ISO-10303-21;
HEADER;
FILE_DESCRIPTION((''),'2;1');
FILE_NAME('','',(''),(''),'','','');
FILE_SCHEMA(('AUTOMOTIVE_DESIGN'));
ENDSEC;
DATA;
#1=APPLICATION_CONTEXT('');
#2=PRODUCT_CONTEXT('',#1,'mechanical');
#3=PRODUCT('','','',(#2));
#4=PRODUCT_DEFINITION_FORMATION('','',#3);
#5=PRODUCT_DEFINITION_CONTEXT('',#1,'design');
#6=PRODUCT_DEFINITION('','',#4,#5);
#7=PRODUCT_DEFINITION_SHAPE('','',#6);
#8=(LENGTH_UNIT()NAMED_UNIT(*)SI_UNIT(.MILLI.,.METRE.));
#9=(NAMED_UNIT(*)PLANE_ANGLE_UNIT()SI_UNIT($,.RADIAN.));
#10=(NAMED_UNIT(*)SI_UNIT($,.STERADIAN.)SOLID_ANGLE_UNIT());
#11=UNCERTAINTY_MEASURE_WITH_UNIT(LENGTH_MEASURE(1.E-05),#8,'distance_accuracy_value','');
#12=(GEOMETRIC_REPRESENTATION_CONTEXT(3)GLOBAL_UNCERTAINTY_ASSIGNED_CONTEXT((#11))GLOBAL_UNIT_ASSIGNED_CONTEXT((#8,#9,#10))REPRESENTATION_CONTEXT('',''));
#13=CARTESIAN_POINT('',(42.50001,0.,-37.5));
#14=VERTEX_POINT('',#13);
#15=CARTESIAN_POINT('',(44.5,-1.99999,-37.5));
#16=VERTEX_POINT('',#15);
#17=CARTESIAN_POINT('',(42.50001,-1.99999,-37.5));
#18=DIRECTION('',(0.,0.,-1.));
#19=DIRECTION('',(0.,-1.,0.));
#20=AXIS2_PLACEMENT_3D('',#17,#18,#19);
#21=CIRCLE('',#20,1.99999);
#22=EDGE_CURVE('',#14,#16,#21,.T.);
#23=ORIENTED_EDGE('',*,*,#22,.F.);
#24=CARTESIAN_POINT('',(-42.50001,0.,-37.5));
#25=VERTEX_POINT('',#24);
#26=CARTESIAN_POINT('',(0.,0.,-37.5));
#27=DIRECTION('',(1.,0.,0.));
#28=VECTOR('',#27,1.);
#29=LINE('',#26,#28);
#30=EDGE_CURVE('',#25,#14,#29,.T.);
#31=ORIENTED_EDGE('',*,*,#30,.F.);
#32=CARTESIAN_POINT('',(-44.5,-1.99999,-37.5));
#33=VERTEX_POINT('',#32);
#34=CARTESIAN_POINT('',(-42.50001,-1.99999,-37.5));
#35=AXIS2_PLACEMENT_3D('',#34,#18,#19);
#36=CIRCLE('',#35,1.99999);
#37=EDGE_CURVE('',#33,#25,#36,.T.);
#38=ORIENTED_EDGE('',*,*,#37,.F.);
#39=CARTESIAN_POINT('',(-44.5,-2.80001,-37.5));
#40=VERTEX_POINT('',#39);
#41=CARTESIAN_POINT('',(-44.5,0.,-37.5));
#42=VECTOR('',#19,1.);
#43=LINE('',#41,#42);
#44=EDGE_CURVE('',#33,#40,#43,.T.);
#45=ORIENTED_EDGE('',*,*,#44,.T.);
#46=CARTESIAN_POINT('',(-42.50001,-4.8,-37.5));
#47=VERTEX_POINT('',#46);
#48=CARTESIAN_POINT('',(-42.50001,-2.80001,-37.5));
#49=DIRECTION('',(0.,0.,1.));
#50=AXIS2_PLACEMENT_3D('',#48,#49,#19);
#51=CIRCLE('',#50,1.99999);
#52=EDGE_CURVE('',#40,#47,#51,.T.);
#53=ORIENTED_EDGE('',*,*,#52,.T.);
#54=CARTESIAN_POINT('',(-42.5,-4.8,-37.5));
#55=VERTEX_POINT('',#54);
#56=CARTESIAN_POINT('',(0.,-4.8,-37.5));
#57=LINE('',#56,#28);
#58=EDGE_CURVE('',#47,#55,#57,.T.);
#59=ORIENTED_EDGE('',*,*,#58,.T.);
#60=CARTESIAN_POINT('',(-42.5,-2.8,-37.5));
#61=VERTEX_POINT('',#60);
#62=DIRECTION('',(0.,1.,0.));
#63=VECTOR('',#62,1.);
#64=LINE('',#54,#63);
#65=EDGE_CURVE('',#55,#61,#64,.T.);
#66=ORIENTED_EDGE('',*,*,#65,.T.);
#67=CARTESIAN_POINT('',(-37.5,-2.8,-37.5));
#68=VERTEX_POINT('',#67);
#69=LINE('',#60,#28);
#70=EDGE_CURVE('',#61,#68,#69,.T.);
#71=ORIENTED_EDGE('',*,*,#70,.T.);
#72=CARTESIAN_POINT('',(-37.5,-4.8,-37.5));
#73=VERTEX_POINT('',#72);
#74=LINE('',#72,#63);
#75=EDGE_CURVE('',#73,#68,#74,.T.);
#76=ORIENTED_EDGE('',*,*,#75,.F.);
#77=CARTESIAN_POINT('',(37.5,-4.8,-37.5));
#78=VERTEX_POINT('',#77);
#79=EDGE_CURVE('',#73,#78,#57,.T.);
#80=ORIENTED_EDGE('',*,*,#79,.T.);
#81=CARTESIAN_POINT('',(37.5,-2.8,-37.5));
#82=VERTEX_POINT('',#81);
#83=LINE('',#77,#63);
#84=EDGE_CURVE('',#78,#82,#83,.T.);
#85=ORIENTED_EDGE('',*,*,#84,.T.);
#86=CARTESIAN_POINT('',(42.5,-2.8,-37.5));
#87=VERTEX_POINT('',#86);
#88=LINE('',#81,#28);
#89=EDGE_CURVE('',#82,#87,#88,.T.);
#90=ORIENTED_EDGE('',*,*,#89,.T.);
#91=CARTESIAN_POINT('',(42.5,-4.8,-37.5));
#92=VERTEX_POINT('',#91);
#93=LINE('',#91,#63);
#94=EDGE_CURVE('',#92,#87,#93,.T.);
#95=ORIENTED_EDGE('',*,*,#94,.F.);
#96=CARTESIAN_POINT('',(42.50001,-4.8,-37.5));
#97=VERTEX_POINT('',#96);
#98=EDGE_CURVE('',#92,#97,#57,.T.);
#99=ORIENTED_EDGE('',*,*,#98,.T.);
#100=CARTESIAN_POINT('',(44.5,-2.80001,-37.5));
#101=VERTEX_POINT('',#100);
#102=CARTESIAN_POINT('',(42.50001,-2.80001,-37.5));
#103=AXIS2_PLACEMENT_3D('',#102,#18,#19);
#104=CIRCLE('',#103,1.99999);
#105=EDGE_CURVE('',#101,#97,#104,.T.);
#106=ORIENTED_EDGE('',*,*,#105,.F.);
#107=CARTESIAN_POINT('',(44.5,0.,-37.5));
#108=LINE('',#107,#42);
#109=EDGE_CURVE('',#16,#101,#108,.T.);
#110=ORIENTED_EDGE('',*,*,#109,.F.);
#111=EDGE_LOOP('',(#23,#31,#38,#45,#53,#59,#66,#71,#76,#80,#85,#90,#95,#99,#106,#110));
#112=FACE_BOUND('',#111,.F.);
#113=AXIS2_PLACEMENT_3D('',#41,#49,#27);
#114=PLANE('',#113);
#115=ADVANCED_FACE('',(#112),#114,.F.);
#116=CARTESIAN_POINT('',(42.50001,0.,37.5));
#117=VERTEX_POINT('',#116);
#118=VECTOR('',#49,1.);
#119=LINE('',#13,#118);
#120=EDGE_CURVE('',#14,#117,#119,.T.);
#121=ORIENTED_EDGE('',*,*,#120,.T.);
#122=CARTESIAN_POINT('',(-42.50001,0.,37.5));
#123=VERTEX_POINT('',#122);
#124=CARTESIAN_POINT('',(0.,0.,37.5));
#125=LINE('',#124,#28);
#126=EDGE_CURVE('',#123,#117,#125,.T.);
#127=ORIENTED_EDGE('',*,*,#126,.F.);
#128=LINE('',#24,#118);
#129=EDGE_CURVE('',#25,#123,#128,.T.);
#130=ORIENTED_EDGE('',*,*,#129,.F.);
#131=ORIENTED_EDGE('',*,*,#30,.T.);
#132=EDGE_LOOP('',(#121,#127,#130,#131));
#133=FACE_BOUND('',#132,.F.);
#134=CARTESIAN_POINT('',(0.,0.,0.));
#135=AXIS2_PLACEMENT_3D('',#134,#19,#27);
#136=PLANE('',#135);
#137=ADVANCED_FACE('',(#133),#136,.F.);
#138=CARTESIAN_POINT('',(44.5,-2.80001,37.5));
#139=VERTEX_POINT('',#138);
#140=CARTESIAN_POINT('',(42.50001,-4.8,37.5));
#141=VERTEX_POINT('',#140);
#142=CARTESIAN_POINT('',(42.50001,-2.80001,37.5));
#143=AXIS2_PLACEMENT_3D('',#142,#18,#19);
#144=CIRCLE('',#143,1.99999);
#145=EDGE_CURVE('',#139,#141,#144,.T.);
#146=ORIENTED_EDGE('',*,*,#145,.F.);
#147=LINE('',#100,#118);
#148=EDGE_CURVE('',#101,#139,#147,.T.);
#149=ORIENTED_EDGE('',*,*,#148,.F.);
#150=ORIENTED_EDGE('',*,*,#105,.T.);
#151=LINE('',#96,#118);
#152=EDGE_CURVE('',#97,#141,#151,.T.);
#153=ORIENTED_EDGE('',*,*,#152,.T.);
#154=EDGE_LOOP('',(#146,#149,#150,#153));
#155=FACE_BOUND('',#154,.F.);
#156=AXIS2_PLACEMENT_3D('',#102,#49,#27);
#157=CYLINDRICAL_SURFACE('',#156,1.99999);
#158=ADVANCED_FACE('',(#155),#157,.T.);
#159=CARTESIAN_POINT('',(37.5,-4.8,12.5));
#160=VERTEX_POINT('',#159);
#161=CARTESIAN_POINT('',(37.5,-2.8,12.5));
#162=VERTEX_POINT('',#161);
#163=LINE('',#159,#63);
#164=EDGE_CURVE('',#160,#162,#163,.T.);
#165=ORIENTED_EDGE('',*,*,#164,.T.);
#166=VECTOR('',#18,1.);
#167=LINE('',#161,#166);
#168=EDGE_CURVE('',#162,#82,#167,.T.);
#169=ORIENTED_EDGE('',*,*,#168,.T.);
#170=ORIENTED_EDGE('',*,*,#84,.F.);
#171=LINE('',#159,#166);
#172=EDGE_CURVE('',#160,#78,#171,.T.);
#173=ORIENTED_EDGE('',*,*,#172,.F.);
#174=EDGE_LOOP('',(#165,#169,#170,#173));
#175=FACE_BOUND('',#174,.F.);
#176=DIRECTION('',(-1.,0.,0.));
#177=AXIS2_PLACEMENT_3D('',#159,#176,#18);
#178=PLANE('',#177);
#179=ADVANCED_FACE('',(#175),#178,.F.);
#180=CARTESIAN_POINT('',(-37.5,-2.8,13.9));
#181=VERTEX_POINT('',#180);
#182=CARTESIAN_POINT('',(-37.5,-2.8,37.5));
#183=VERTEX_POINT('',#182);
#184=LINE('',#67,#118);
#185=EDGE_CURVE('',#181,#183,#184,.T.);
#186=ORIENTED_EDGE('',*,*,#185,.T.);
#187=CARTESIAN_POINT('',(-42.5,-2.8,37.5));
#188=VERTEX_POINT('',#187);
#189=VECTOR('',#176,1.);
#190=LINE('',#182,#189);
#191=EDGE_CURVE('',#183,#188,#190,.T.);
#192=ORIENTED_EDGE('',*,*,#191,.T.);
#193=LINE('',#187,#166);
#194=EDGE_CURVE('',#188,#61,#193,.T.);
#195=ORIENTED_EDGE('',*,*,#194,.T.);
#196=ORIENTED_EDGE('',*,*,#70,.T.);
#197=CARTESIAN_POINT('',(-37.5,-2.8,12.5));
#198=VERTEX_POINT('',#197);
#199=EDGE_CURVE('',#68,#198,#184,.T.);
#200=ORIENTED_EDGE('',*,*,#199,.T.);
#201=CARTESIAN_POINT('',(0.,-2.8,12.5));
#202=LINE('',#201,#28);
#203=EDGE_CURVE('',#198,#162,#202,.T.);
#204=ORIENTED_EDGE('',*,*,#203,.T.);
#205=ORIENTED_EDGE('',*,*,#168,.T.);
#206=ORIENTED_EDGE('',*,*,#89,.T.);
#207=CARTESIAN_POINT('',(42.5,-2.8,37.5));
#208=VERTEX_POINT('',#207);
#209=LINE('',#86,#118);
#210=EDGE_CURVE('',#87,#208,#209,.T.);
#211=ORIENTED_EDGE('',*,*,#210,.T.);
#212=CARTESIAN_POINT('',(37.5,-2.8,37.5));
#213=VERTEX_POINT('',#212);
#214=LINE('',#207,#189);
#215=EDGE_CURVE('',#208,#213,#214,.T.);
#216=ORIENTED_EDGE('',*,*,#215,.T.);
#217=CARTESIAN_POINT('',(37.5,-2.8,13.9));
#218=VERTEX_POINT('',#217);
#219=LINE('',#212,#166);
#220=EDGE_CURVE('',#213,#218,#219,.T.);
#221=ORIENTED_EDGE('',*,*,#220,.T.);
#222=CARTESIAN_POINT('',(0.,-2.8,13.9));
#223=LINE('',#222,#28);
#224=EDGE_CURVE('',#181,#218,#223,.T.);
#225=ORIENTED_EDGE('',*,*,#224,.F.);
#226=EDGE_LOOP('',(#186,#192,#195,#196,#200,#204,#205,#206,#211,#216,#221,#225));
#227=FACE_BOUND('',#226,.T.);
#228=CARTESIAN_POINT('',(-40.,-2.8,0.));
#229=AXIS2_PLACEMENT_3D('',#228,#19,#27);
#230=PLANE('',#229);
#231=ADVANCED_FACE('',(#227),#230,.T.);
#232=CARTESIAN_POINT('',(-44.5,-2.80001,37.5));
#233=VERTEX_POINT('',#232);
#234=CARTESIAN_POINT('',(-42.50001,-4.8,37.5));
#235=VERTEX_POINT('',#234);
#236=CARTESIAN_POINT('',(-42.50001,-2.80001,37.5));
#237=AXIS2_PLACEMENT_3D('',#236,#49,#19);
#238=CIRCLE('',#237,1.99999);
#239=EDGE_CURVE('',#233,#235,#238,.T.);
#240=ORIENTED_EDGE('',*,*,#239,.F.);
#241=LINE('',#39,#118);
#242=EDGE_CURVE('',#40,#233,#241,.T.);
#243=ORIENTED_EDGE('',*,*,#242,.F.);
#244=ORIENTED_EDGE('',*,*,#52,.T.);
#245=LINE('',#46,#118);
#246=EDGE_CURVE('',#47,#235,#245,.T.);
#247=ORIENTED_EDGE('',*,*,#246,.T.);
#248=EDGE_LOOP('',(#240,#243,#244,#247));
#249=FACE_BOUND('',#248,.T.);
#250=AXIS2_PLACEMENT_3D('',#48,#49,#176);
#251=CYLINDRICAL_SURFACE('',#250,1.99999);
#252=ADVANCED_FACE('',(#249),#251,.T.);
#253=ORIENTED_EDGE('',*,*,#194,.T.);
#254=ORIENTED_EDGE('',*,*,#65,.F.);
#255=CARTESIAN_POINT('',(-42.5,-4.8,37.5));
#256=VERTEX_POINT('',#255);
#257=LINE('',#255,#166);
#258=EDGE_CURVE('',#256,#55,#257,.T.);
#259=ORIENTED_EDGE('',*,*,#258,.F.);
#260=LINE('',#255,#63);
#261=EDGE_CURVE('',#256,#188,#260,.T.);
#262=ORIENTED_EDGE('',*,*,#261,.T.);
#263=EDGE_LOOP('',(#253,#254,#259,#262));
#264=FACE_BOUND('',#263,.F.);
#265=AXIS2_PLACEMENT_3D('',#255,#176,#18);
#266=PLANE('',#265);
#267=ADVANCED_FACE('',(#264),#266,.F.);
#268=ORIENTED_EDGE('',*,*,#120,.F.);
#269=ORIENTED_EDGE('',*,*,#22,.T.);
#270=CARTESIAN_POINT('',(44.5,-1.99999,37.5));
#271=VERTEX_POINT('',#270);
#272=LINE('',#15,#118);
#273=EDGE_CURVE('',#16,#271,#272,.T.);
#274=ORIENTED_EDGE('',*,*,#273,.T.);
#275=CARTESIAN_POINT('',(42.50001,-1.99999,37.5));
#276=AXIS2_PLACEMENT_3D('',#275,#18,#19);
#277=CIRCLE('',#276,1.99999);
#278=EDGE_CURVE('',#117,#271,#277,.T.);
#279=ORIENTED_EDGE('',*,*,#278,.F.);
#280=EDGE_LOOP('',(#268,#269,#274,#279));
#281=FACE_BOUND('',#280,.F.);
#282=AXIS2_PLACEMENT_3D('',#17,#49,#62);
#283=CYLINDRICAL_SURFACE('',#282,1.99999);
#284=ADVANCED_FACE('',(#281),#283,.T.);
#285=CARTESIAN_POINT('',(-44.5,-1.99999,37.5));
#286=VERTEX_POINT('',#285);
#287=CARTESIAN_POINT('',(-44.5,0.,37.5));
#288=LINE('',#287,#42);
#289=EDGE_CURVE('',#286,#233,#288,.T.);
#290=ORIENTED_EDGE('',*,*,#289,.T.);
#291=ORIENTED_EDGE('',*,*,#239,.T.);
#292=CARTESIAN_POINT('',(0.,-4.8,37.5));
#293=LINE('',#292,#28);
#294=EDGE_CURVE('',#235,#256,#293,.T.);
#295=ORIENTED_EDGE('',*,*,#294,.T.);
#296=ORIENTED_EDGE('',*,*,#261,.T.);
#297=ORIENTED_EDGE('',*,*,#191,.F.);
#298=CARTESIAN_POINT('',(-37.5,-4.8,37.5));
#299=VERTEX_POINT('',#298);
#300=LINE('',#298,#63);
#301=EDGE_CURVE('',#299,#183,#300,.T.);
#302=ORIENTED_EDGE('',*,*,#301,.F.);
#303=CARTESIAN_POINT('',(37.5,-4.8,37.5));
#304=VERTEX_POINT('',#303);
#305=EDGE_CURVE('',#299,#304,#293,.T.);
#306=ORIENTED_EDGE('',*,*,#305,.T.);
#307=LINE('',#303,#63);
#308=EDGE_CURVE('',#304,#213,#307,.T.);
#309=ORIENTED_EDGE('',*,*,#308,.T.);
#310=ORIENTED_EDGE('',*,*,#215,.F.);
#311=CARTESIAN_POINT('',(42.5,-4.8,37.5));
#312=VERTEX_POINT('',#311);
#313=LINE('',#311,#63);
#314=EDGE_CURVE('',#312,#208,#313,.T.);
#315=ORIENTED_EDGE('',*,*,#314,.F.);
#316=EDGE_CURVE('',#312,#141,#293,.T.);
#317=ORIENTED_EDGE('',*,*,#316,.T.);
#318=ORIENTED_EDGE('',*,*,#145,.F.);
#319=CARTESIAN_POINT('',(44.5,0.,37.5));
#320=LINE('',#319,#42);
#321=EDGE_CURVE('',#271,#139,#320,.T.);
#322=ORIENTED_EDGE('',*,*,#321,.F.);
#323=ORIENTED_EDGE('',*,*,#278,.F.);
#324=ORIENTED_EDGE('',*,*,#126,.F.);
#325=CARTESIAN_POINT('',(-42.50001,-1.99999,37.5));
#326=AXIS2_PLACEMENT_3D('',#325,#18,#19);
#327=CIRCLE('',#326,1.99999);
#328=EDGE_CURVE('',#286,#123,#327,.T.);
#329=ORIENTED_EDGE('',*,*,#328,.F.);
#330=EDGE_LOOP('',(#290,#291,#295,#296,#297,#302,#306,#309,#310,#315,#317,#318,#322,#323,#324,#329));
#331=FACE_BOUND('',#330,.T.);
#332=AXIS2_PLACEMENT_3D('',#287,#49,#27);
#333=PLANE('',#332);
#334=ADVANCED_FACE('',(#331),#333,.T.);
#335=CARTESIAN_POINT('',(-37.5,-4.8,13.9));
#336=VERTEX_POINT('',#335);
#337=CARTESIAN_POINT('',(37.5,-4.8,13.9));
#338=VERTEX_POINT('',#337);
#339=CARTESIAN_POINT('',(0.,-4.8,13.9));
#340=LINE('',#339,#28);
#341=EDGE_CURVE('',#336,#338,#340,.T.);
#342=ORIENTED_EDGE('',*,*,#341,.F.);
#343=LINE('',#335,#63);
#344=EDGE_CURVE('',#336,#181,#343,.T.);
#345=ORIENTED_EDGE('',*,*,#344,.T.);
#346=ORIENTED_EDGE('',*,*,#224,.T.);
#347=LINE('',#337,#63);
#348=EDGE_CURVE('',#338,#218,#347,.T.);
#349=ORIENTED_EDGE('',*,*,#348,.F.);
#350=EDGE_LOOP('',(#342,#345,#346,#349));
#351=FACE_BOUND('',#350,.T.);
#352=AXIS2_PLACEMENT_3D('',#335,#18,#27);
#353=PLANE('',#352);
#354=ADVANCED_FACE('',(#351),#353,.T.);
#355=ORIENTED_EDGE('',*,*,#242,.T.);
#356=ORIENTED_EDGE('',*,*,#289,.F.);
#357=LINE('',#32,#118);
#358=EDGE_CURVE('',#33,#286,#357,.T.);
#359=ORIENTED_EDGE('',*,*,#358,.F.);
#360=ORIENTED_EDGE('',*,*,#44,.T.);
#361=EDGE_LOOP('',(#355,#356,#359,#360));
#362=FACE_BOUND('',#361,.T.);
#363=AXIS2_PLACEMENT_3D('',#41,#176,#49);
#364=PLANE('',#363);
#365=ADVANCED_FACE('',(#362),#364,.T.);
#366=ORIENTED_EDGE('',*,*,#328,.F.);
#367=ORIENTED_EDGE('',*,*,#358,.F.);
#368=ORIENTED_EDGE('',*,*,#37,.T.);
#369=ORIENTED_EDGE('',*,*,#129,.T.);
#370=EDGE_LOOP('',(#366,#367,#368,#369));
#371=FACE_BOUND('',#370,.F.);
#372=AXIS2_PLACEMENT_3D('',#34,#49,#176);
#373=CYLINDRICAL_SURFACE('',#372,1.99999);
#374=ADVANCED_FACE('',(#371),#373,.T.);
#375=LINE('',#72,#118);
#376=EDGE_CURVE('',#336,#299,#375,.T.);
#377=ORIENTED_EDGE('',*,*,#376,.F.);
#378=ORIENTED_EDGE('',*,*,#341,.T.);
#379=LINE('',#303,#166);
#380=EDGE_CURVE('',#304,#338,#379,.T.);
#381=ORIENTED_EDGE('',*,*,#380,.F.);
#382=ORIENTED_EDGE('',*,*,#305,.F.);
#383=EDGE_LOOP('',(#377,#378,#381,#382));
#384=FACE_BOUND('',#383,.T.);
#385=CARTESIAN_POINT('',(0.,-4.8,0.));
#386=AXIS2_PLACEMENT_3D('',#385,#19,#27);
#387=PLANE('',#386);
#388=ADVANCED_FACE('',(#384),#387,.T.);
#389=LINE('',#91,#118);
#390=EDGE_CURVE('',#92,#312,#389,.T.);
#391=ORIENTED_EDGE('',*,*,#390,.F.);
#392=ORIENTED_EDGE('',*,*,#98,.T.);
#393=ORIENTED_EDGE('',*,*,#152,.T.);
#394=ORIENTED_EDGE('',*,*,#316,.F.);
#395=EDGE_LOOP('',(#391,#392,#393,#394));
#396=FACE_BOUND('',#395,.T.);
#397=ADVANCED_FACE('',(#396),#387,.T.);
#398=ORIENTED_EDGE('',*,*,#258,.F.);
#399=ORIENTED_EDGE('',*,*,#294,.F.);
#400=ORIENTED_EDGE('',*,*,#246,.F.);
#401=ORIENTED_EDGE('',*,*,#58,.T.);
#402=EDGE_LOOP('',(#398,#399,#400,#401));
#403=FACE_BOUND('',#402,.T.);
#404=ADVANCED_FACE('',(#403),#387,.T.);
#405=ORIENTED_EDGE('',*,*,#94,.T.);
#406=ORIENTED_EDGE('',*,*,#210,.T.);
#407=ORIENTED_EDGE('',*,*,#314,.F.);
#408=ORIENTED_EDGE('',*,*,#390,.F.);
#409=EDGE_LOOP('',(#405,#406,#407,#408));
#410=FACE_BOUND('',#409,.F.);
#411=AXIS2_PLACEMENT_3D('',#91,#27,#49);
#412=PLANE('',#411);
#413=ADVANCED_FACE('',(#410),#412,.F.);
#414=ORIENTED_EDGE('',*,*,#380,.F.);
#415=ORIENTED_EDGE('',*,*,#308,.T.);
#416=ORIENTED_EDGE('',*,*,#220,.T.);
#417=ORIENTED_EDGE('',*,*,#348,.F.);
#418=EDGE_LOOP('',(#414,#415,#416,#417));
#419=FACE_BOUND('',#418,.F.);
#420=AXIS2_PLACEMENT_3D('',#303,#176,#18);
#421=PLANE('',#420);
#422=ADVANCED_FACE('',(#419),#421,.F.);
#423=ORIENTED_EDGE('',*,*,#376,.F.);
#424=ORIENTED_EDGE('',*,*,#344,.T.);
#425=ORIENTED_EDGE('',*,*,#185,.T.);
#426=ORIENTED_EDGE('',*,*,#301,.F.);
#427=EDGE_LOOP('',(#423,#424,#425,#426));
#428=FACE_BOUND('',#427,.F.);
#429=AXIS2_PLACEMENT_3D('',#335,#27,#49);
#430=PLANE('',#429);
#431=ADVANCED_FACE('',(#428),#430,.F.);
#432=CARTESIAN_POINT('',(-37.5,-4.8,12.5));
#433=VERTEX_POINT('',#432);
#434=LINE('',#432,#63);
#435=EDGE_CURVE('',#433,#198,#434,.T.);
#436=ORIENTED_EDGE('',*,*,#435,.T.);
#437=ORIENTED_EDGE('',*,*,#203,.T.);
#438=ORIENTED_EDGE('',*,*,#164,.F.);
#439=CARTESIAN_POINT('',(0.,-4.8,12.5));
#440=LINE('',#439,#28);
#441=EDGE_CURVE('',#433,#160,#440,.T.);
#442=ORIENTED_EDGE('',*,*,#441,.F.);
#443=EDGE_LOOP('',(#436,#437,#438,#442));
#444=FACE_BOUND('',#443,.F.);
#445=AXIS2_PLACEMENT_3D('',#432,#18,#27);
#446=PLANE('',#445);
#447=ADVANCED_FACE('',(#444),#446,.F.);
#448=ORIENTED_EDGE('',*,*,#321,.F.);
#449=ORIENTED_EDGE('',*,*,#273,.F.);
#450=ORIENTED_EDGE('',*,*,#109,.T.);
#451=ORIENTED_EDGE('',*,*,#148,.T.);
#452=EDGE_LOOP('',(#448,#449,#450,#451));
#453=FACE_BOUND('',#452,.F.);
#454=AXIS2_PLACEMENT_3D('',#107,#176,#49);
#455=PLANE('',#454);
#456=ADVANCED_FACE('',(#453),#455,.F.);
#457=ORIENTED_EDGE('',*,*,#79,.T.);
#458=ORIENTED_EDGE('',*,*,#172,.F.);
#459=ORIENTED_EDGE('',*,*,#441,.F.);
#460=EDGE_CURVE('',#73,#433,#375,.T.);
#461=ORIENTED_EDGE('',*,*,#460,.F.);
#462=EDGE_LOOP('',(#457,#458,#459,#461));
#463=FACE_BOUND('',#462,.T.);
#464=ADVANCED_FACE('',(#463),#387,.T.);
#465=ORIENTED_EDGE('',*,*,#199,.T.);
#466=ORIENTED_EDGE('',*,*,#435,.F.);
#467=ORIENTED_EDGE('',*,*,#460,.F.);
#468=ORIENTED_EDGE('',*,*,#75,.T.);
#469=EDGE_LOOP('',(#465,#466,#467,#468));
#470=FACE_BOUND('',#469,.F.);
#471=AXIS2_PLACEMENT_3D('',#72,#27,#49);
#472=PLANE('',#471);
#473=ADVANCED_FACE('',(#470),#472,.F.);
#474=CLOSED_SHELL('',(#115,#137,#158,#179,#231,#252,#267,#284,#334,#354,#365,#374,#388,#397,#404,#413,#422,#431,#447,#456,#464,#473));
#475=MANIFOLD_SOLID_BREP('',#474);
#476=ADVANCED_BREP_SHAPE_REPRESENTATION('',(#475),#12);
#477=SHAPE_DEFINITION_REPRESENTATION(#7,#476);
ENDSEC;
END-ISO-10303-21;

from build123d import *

# Parameters (mm, degrees)
F0_W     = 89
F0_H     = 75
F1_DEPTH = 4.8
F2_W     = 75
F2_H     = 1.4
F3_DEPTH = 2
F4_R     = 1.99999


# Not quite as in the source:
# - a fillet or chamfer is up to 0.001 mm smaller than in the source, because OpenCascade refuses the exact size


with BuildPart() as f1:
    # F0 (on Front) → F1 (new body)
    with BuildSketch(Plane.XZ):
        Rectangle(F0_W, F0_H)
    extrude(amount=F1_DEPTH)

    # F2 (on face) → F3 (cut)
    with BuildSketch(Plane.XZ.offset(4.8)):
        Polygon((-42.5, 37.5), (-42.5, -37.5), (-37.5, -37.5), (-37.5, 12.5), (-37.5, 13.9), (-37.5, 37.5), align=None)
        with Locations((0, 13.2)):
            Rectangle(F2_W, F2_H)
        Polygon((37.5, 13.9), (37.5, 12.5), (37.5, -37.5), (42.5, -37.5), (42.5, 37.5), (37.5, 37.5), align=None)
    extrude(amount=-F3_DEPTH, mode=Mode.SUBTRACT)

    # F4 (radius 2 in the source; OpenCascade refuses exactly that, so slightly less here)
    f4_edges = [f1.edges().sort_by_distance(p)[0] for p in [
        (-44.5, -4.8, 0),
        (44.5, -4.8, 0),
        (44.5, 0, 0),
        (-44.5, 0, 0),
    ]]
    fillet(f4_edges, radius=F4_R)


solid = f1.part
